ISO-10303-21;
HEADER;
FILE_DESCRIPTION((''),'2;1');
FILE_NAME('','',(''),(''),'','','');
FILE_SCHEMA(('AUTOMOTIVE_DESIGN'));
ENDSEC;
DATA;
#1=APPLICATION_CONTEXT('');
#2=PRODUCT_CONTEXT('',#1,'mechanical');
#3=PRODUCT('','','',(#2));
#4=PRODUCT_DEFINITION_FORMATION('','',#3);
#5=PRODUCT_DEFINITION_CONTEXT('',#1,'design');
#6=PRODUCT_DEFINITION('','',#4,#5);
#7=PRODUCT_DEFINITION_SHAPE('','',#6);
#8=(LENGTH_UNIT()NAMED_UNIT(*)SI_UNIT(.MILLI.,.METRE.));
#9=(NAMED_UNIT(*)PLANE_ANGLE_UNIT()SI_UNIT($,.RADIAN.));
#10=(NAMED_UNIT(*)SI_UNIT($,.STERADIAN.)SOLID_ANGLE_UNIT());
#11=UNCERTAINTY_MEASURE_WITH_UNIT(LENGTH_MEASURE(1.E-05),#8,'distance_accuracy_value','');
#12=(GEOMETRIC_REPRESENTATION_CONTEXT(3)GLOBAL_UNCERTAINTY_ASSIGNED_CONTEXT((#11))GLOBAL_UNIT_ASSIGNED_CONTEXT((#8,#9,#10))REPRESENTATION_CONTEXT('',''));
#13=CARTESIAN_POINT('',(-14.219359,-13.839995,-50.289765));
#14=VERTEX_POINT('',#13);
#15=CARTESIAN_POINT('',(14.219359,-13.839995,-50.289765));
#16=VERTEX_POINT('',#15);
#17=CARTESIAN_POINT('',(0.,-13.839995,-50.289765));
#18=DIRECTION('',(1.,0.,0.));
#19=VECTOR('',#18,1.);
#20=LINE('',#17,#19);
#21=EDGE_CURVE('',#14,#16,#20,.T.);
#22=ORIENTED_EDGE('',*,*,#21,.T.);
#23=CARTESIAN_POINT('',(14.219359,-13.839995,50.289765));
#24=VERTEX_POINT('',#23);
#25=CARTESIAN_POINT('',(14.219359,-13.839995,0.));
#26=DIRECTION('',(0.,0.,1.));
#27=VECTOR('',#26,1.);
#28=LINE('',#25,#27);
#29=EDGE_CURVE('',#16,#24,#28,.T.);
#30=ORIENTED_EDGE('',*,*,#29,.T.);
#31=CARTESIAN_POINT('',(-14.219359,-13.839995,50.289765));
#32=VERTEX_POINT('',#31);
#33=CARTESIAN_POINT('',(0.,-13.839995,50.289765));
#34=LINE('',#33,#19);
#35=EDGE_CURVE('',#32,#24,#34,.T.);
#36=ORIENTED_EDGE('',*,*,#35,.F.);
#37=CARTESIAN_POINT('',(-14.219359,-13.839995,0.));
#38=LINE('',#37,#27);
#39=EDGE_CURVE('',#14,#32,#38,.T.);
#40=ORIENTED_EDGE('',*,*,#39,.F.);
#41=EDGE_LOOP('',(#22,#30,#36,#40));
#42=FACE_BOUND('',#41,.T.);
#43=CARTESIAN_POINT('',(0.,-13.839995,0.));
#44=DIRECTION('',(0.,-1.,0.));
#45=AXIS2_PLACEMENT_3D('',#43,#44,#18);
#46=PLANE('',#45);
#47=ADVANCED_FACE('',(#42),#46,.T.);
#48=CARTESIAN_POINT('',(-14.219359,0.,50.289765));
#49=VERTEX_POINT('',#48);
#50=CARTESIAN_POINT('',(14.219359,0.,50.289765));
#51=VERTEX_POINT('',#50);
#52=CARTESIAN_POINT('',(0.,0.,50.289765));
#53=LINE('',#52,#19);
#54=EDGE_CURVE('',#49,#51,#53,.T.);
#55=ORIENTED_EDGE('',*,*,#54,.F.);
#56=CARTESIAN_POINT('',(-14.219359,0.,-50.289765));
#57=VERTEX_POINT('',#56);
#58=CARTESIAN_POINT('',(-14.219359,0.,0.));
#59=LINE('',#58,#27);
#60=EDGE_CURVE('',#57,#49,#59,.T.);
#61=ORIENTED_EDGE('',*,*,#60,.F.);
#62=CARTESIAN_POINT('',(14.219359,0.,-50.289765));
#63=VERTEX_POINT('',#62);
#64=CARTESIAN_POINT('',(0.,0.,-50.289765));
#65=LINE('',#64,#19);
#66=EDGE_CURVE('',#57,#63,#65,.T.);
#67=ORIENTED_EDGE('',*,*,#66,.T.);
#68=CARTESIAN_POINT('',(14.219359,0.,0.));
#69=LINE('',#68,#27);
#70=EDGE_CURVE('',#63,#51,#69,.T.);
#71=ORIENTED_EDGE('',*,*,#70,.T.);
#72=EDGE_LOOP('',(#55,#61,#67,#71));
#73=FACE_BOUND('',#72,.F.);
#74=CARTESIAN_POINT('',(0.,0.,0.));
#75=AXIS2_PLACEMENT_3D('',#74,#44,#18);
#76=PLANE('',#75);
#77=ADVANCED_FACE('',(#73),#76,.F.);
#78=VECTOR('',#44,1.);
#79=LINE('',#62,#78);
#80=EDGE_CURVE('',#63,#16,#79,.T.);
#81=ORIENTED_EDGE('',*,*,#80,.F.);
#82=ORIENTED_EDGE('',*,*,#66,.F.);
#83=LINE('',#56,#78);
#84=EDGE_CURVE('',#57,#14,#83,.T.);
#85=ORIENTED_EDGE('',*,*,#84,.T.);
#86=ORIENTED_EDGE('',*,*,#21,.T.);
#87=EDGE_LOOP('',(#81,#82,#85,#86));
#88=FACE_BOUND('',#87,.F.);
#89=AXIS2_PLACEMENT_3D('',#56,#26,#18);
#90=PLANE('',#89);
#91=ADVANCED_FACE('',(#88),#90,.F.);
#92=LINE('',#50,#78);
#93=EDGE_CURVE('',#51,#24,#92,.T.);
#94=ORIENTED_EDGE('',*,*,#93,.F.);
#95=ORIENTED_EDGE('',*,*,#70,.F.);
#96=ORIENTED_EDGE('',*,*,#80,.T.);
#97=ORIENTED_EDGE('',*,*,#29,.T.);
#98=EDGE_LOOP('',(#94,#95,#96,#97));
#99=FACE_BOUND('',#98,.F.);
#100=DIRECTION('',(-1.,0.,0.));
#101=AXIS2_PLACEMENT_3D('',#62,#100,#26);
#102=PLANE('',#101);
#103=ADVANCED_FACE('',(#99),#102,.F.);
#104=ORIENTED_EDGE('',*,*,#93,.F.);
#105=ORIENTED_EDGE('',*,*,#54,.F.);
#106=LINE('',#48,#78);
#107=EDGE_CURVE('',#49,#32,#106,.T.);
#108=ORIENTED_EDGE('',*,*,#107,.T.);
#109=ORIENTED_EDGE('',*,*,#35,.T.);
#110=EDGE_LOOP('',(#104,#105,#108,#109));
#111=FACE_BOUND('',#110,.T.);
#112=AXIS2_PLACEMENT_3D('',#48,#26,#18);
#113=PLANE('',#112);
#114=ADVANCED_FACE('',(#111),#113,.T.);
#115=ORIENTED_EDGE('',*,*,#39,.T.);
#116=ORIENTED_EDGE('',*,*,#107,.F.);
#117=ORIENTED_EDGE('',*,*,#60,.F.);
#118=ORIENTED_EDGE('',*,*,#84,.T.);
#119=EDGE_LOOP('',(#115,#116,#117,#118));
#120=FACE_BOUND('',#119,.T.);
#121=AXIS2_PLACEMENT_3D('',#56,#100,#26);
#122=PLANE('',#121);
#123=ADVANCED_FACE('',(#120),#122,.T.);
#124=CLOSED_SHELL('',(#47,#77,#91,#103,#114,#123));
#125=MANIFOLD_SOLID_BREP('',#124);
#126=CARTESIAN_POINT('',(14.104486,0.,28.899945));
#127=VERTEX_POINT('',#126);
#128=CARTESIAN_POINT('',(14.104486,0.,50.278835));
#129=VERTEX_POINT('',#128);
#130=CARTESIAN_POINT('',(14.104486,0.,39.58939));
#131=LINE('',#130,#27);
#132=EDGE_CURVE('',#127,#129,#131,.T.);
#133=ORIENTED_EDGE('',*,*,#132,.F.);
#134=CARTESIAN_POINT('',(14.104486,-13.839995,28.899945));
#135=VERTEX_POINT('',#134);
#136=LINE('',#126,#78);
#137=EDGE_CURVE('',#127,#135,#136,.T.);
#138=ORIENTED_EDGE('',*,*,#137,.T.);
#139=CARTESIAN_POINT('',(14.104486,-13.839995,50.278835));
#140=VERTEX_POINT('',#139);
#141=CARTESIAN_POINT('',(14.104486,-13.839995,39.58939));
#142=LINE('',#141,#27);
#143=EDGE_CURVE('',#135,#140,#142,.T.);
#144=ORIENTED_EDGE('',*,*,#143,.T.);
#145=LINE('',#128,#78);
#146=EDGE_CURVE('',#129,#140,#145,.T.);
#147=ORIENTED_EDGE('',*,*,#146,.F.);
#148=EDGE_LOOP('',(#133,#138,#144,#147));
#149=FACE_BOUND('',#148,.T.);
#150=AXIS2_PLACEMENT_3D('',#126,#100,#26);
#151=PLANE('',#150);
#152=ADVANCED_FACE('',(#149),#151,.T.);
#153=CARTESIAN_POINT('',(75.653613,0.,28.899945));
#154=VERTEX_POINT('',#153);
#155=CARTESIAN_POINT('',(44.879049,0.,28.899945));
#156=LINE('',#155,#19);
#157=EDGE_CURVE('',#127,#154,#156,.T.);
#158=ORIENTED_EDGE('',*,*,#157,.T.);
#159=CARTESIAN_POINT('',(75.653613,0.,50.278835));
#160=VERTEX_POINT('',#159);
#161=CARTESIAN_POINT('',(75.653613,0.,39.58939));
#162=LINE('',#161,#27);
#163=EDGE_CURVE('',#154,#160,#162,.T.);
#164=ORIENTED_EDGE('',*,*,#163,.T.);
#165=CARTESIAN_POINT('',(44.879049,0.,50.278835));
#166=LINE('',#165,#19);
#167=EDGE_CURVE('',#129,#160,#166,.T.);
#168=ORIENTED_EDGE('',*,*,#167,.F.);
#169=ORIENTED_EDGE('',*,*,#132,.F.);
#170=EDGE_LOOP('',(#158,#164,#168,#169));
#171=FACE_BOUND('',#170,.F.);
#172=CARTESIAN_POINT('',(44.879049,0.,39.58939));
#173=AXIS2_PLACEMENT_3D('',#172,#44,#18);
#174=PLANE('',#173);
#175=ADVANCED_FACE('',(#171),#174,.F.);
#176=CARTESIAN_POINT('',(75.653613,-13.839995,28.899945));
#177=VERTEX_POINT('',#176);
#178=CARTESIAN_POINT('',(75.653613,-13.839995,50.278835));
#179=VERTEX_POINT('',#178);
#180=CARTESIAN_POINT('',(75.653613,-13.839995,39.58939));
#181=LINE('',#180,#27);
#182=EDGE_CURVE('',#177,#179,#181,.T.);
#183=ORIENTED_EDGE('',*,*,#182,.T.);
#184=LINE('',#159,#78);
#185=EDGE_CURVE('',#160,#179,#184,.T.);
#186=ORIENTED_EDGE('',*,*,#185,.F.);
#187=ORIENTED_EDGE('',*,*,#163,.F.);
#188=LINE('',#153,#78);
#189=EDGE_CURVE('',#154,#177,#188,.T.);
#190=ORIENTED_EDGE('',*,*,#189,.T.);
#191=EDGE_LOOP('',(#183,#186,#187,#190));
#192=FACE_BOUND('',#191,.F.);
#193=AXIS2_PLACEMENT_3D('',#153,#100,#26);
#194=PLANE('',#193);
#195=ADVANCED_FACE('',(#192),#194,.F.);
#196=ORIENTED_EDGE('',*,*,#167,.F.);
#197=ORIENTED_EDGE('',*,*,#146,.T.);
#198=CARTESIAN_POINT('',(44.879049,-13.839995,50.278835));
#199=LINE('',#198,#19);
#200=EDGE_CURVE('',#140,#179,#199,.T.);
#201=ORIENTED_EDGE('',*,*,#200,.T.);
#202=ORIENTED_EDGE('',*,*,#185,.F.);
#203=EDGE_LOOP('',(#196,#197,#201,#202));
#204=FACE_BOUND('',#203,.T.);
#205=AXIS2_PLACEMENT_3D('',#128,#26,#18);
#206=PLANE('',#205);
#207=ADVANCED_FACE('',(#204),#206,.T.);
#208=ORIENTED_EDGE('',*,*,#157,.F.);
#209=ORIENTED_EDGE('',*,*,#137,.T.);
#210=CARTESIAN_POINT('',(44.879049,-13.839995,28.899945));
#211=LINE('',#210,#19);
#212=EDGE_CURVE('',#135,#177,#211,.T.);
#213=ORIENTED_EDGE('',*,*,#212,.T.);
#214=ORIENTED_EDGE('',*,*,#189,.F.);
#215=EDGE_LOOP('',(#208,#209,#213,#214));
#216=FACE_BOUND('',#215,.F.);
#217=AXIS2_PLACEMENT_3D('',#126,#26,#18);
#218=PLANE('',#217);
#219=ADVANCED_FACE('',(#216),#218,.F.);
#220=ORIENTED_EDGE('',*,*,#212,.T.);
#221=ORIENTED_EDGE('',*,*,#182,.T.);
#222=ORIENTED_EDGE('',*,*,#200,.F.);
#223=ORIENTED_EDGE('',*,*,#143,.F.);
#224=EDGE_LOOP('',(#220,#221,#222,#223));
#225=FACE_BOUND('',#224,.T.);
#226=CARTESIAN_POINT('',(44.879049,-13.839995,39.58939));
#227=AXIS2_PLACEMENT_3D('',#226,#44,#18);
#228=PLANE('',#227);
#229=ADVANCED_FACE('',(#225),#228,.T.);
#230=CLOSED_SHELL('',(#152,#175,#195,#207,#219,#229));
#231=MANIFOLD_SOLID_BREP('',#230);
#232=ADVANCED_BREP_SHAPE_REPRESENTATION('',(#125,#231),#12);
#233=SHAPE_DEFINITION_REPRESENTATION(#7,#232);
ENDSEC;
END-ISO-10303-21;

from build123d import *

# Parameters (mm, degrees)
F1_W     = 61.5491271019
F1_H     = 21.3788896799
F2_DEPTH = 13.8399954885
F0_W     = 28.4387171268
F0_H     = 100.5795300007


with BuildPart() as f2:
    # F1 (on Front) → F2 (new body)
    with BuildSketch(Plane.XZ):
        with Locations((44.8790490627, 39.5893901587)):
            Rectangle(F1_W, F1_H)
    extrude(amount=F2_DEPTH)


with BuildPart() as f2b:
    # F0 (on Front) → F2, piece 2 (new body)
    with BuildSketch(Plane.XZ):
        Rectangle(F0_W, F0_H)
    extrude(amount=F2_DEPTH)


solid = Compound([f2.part, f2b.part])
